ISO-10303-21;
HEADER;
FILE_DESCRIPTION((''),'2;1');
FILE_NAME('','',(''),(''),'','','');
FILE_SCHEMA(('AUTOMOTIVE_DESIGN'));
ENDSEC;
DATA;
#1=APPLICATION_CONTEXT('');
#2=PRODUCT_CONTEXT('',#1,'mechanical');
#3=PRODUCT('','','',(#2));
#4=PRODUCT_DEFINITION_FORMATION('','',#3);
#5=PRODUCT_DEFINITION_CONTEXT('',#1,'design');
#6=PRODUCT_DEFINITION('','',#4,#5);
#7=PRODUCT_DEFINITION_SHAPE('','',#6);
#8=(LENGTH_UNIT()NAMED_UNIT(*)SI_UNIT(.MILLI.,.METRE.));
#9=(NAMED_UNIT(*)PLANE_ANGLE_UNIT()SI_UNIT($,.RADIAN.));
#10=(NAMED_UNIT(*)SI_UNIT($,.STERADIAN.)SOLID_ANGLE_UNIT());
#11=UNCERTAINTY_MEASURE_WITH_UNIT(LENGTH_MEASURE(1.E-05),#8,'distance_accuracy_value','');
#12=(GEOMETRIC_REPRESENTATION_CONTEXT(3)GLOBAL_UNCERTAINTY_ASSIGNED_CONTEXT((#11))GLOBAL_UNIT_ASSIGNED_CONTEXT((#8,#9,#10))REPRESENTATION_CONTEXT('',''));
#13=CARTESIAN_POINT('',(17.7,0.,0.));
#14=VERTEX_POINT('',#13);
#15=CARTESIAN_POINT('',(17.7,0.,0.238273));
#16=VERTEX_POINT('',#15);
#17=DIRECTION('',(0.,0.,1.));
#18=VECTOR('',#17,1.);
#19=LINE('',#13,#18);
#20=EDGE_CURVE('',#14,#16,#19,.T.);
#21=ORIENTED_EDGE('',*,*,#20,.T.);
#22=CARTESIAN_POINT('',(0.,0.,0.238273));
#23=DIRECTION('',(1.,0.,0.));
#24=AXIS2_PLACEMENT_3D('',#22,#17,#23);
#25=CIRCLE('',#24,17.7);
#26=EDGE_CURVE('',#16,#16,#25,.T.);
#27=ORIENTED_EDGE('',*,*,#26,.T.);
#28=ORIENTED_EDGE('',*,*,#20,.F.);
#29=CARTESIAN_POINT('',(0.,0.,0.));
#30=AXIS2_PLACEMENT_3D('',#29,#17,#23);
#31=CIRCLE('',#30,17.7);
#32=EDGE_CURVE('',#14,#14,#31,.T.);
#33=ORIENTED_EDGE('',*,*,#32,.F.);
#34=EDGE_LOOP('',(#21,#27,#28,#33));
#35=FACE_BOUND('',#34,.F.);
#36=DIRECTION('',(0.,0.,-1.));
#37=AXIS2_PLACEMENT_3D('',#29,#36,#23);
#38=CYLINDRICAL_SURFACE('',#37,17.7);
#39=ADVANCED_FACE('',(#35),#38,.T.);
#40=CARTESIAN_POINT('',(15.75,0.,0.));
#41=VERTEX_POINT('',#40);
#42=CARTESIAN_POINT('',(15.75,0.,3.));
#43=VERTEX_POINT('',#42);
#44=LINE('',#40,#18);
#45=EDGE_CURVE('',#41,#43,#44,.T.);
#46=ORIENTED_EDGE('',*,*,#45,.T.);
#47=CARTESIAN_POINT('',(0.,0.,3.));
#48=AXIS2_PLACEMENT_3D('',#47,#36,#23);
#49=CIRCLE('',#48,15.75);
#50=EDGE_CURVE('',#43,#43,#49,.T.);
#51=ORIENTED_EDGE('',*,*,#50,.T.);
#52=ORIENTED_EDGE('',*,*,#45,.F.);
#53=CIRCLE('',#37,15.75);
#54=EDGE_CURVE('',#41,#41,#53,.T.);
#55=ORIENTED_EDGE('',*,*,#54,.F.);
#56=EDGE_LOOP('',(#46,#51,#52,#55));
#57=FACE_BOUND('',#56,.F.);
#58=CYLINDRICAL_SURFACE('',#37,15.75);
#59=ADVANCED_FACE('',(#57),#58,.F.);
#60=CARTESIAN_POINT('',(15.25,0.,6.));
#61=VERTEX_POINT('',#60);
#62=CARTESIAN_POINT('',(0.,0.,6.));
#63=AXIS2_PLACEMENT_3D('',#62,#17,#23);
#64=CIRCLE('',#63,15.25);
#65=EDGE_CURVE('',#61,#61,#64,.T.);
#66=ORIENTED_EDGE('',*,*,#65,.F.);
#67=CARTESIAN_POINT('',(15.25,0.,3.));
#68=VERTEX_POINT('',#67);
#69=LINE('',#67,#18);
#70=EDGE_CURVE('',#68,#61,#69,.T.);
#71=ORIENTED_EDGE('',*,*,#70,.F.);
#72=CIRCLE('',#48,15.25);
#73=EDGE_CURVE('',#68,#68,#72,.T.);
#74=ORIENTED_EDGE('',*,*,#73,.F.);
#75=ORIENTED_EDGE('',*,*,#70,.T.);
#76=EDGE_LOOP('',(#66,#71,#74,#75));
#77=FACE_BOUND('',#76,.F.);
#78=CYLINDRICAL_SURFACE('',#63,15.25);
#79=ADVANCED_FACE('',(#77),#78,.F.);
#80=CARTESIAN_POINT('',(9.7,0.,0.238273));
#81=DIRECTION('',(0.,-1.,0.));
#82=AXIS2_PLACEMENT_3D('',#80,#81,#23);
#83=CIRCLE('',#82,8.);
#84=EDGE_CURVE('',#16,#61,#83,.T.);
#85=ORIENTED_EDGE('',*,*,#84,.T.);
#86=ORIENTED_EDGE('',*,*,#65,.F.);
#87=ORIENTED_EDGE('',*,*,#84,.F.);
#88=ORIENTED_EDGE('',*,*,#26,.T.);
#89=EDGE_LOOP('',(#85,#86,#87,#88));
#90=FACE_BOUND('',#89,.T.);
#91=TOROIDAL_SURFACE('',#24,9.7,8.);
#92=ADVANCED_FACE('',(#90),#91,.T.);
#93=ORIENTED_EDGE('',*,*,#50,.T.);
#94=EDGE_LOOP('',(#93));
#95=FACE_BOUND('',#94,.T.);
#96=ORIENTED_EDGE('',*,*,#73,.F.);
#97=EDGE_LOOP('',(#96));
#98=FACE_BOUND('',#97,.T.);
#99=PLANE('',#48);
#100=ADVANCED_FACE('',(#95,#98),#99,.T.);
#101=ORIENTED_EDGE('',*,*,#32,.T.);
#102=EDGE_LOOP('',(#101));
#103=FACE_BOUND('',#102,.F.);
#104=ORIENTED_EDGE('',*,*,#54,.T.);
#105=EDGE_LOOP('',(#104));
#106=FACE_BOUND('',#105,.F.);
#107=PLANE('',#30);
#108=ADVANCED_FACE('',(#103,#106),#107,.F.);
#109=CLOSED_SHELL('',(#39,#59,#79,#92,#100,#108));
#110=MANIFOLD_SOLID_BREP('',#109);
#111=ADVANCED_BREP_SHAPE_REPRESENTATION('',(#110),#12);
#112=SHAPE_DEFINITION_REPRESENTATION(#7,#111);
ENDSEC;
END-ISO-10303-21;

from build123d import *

# Parameters (mm, degrees)
F0_R     = 17.7
F1_DEPTH = 6
F2_R     = 15.75
F3_DEPTH = 3
F4_R     = 15.25
F5_DEPTH = 2
F6_R     = 15.25
F7_DEPTH = 1


# Not quite as in the source:
# - a fillet or chamfer that OpenCascade refuses, or shapes differently, is made with other operations: its cross-section is extruded or revolved along the edge and cut away or added


with BuildPart() as f1:
    # F0 (on Top) → F1 (new body)
    with BuildSketch(Plane.XY):
        Circle(F0_R)
    extrude(amount=F1_DEPTH)

    # F2 (on face) → F3 (cut)
    with BuildSketch(Plane(origin=(0, 0, 0), x_dir=(1, 0, 0), z_dir=(0, 0, -1))):
        Circle(F2_R)
    extrude(amount=-F3_DEPTH, mode=Mode.SUBTRACT)

    # F4 (on face) → F5 (cut)
    with BuildSketch(Plane(origin=(0, 0, 3), x_dir=(1, 0, 0), z_dir=(0, 0, -1))):
        Circle(F4_R)
    extrude(amount=-F5_DEPTH, mode=Mode.SUBTRACT)

    # F6 (on face) → F7 (cut)
    with BuildSketch(Plane.XY.offset(6)):
        Circle(F6_R)
    extrude(amount=-F7_DEPTH, mode=Mode.SUBTRACT)

    # F8: fillet of radius 8 on 1 edges, made by hand

    # F8_s1 → F8_t2 (revolve, cut)
    with BuildSketch(Plane.XZ):
        with BuildLine():
            ThreePointArc((17.7, 0.2382728284), (17.0620649277, 3.3687679969), (15.25, 6))
            Line((15.25, 6), (15.361, 6.1152345434))
            ThreePointArc((15.361, 6.1152345434), (16.475, 6.16), (17.7, 6.16))
            Line((17.7, 6.16), (17.86, 6))
            Line((17.86, 6), (17.86, 0.2382728284))
            Line((17.86, 0.2382728284), (17.7, 0.2382728284))
        make_face()
    revolve(axis=Axis((0, 0, 6), (0, 0, 1)), mode=Mode.SUBTRACT)


solid = f1.part
